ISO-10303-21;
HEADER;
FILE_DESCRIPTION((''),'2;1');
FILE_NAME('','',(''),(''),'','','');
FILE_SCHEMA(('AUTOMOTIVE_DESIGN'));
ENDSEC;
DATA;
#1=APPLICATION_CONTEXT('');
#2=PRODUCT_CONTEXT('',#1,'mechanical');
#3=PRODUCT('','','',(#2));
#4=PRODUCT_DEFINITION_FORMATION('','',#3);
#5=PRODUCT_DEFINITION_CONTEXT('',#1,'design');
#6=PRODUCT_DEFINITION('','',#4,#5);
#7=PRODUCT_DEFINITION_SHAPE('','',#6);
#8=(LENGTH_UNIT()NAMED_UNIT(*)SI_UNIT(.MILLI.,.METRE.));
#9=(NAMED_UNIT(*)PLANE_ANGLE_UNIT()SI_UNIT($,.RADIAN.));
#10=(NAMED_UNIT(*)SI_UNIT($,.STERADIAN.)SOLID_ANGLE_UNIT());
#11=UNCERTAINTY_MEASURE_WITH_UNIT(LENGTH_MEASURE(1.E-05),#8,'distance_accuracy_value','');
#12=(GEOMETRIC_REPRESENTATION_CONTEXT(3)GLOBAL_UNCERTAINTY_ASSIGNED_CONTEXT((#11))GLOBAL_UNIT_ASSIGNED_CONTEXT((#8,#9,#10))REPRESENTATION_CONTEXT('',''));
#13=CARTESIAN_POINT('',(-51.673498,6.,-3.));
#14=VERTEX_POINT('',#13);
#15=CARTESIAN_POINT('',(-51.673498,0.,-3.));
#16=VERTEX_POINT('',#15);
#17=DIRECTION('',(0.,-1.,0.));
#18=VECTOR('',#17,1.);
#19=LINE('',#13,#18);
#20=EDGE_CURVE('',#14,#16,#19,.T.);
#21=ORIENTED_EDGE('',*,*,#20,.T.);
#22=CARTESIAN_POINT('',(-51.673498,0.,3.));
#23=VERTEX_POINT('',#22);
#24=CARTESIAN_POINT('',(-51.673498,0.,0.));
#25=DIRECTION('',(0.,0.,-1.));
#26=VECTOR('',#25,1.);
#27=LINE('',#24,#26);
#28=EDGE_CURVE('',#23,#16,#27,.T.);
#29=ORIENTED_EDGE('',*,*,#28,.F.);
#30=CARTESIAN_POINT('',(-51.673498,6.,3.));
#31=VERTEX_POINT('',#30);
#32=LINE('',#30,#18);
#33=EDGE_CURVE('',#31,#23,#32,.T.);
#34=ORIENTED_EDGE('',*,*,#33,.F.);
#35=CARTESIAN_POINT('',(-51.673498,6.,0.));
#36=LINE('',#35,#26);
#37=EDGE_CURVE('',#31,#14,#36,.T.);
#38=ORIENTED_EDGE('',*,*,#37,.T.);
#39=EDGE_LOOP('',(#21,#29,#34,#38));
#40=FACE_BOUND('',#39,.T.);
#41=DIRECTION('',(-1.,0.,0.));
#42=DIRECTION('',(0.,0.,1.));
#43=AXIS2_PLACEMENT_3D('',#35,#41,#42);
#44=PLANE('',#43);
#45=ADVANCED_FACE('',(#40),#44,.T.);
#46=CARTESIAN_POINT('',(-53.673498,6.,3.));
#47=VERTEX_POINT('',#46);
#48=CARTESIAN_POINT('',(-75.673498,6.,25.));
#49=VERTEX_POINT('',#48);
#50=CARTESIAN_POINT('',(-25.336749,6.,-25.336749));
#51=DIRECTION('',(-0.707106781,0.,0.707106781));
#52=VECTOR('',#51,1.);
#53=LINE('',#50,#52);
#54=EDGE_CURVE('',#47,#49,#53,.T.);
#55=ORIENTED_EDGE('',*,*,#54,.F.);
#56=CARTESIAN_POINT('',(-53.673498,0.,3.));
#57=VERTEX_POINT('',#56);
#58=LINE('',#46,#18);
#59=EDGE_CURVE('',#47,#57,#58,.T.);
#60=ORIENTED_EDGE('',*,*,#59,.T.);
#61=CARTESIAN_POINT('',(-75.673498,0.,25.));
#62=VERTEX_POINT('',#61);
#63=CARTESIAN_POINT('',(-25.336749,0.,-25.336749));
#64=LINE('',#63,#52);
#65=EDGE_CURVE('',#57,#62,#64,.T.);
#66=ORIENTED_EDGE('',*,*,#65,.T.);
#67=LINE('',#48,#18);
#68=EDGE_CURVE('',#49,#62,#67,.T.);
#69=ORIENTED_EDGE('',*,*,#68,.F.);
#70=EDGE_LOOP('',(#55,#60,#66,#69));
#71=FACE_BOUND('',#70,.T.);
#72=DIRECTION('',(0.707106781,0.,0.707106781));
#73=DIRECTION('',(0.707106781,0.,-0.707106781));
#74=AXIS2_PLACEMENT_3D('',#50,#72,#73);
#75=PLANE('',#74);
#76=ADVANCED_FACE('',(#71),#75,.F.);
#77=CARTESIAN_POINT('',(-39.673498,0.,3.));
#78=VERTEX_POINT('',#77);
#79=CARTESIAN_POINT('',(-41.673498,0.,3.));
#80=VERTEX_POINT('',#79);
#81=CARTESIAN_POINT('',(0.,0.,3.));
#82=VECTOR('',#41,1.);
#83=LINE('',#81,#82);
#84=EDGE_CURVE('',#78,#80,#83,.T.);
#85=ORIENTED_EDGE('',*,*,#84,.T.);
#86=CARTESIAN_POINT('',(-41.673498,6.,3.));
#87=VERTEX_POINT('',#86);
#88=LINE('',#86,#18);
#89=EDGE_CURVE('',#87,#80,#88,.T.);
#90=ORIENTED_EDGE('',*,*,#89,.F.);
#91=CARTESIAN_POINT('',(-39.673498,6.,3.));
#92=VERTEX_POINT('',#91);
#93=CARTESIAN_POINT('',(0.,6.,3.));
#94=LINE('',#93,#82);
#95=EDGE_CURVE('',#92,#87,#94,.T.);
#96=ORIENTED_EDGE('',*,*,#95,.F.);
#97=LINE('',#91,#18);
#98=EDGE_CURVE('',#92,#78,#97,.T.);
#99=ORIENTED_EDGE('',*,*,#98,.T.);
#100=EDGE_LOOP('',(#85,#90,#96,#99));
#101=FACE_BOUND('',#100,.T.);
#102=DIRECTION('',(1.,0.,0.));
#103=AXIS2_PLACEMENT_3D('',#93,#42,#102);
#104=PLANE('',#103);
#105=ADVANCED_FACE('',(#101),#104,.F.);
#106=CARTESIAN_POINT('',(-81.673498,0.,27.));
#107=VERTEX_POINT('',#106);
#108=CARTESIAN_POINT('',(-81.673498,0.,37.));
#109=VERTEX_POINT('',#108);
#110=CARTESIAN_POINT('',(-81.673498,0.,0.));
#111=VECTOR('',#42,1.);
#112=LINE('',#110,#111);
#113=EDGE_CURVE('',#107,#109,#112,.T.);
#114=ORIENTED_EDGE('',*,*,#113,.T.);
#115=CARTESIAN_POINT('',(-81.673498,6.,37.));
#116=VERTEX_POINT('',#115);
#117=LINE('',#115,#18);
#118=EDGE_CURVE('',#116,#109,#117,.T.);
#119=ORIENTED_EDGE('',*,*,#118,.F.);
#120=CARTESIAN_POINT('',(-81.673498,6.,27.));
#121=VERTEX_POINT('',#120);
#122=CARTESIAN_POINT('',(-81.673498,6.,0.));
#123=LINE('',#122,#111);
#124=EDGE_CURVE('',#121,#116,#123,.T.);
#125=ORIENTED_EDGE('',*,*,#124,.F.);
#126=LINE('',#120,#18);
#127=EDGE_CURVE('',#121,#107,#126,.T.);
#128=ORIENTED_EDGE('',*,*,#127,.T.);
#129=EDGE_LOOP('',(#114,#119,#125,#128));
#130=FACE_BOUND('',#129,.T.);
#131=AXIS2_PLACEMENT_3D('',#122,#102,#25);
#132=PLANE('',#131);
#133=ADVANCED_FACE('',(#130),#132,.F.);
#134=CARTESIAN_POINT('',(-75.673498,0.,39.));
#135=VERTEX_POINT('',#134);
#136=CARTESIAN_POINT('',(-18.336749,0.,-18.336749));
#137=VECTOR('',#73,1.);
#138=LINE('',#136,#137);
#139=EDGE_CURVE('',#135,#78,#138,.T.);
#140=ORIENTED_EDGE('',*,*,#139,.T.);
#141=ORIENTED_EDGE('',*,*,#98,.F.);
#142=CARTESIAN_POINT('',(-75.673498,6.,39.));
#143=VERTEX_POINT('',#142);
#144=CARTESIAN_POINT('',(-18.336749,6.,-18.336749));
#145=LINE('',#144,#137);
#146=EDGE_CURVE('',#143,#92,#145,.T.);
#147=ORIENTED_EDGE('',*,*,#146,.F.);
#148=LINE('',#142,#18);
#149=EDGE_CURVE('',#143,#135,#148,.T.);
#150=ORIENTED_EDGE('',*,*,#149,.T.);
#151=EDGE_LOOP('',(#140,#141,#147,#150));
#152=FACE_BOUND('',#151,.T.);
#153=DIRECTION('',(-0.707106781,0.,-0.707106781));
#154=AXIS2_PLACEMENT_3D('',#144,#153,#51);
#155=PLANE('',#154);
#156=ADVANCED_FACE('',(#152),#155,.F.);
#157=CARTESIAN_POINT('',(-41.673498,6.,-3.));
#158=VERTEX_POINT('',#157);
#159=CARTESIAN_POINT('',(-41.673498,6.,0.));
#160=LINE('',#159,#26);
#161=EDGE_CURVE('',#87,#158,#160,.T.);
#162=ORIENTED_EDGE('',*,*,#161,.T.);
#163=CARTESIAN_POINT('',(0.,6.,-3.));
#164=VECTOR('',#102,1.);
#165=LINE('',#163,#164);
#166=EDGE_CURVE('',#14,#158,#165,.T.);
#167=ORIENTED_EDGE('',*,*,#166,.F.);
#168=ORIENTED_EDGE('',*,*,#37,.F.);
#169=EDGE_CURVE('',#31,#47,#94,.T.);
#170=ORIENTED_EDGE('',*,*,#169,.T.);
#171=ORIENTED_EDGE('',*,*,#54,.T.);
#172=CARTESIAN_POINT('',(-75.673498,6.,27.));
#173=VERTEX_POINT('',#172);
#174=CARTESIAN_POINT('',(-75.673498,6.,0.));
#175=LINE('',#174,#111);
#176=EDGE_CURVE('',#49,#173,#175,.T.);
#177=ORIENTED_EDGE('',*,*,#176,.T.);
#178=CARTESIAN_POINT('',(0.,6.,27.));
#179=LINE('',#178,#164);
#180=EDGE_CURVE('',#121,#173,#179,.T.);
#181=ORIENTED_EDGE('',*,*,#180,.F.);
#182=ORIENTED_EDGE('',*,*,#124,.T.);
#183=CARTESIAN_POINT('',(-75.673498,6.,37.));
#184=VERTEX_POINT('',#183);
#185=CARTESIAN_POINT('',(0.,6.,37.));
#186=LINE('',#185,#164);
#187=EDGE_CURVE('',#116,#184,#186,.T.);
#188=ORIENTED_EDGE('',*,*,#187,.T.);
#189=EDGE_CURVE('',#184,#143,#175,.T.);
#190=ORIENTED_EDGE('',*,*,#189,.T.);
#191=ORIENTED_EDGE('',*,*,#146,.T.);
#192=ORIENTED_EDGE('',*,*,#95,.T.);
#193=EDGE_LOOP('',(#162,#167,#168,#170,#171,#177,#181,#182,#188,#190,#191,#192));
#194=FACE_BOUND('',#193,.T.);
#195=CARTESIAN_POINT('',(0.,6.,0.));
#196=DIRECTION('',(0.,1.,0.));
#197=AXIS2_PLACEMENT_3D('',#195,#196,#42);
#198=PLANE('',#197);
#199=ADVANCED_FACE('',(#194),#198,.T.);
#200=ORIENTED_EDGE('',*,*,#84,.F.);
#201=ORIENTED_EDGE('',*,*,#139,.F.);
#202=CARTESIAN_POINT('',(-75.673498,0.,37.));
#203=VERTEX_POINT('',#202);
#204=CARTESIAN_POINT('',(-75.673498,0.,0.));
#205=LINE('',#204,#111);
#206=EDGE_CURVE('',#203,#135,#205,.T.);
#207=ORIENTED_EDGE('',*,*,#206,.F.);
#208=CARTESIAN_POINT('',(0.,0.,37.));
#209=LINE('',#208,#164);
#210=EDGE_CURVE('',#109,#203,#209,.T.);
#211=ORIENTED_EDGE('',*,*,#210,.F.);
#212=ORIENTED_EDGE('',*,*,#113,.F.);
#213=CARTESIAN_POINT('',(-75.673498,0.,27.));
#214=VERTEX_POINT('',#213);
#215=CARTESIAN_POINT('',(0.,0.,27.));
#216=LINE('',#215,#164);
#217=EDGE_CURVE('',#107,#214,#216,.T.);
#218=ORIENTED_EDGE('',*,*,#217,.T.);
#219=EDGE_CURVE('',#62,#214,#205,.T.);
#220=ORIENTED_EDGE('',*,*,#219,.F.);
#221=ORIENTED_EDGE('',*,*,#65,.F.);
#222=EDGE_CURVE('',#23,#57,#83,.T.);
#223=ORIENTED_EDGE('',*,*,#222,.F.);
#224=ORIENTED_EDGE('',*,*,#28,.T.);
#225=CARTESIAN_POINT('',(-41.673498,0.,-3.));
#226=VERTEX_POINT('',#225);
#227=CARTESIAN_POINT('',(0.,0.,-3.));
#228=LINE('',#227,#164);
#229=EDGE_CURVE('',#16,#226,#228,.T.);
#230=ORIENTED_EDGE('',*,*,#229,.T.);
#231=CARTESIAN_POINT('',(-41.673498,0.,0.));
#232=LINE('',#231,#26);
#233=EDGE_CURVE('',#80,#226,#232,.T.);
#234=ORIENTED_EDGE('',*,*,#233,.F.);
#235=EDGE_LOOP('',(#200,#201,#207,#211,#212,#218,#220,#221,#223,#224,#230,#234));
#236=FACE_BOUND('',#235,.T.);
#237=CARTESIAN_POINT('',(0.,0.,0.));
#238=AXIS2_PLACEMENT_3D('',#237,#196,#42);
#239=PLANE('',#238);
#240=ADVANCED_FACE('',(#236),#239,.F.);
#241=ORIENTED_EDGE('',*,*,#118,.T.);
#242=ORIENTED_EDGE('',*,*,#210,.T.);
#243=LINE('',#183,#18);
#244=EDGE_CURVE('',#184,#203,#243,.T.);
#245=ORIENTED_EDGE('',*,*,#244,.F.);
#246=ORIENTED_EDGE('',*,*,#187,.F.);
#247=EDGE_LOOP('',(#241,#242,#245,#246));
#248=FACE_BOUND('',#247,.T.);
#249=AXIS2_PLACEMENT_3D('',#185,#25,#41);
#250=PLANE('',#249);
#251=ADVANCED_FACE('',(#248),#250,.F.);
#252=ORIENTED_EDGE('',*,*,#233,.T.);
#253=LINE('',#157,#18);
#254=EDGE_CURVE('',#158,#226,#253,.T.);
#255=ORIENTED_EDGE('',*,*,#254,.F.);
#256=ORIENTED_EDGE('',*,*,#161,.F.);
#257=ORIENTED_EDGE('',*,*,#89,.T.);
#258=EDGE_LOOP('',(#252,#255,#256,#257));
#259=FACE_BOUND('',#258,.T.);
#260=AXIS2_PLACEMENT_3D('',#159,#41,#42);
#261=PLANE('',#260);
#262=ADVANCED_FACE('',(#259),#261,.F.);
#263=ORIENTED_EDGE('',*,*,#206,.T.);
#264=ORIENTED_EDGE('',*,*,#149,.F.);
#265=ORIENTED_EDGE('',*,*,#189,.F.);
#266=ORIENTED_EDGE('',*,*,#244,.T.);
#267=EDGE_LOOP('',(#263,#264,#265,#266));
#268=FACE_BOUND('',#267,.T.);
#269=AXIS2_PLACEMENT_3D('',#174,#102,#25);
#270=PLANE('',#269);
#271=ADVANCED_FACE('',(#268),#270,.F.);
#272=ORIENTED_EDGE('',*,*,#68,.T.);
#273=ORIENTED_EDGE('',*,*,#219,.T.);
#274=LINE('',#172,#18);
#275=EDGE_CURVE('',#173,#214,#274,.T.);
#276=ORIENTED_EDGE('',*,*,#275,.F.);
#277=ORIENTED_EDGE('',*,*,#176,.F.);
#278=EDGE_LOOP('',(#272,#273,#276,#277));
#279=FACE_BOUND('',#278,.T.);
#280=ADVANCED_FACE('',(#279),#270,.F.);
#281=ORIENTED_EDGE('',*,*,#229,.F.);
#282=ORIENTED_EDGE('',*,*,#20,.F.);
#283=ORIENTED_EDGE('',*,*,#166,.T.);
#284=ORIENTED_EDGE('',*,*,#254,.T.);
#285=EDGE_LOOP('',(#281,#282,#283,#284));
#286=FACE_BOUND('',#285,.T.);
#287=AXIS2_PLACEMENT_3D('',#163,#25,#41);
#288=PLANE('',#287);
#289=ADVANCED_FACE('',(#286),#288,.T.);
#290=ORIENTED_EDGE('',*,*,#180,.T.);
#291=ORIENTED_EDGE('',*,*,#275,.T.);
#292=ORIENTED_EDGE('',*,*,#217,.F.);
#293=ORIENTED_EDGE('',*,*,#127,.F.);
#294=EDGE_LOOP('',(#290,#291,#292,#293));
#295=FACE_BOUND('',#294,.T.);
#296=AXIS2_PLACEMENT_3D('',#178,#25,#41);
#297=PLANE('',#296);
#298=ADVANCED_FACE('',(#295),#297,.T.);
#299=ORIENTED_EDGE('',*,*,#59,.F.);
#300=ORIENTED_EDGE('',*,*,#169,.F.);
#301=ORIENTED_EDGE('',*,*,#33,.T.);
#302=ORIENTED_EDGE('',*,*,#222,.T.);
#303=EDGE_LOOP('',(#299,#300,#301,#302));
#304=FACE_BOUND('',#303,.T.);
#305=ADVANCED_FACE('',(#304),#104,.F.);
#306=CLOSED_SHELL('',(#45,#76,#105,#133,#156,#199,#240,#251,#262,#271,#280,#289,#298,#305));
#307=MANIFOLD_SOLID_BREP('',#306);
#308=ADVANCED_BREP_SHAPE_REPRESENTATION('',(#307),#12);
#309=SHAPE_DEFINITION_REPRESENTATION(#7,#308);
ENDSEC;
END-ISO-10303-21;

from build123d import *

# Parameters (mm, degrees)
EXTRUDE_1_DEPTH = 6


# Read off the part's stored shape, not the designer's step: 填料-伸長1
with BuildPart() as part:
    # 填料-伸長1 outline → 填料-伸長1 (new body)
    with BuildSketch(Plane(origin=(0, 0, 0), x_dir=(1, 0, 0), z_dir=(0, 1, 0))):
        Polygon((-81.673498196, -37), (-75.673498196, -37), (-75.673498196, -39), (-39.673498196, -3), (-41.673498196, -3), (-41.673498196, 3), (-51.673498196, 3), (-51.673498196, -3), (-53.673498196, -3), (-75.673498196, -25), (-75.673498196, -27), (-81.673498196, -27), align=None)
    extrude(amount=EXTRUDE_1_DEPTH)


solid = part.part
